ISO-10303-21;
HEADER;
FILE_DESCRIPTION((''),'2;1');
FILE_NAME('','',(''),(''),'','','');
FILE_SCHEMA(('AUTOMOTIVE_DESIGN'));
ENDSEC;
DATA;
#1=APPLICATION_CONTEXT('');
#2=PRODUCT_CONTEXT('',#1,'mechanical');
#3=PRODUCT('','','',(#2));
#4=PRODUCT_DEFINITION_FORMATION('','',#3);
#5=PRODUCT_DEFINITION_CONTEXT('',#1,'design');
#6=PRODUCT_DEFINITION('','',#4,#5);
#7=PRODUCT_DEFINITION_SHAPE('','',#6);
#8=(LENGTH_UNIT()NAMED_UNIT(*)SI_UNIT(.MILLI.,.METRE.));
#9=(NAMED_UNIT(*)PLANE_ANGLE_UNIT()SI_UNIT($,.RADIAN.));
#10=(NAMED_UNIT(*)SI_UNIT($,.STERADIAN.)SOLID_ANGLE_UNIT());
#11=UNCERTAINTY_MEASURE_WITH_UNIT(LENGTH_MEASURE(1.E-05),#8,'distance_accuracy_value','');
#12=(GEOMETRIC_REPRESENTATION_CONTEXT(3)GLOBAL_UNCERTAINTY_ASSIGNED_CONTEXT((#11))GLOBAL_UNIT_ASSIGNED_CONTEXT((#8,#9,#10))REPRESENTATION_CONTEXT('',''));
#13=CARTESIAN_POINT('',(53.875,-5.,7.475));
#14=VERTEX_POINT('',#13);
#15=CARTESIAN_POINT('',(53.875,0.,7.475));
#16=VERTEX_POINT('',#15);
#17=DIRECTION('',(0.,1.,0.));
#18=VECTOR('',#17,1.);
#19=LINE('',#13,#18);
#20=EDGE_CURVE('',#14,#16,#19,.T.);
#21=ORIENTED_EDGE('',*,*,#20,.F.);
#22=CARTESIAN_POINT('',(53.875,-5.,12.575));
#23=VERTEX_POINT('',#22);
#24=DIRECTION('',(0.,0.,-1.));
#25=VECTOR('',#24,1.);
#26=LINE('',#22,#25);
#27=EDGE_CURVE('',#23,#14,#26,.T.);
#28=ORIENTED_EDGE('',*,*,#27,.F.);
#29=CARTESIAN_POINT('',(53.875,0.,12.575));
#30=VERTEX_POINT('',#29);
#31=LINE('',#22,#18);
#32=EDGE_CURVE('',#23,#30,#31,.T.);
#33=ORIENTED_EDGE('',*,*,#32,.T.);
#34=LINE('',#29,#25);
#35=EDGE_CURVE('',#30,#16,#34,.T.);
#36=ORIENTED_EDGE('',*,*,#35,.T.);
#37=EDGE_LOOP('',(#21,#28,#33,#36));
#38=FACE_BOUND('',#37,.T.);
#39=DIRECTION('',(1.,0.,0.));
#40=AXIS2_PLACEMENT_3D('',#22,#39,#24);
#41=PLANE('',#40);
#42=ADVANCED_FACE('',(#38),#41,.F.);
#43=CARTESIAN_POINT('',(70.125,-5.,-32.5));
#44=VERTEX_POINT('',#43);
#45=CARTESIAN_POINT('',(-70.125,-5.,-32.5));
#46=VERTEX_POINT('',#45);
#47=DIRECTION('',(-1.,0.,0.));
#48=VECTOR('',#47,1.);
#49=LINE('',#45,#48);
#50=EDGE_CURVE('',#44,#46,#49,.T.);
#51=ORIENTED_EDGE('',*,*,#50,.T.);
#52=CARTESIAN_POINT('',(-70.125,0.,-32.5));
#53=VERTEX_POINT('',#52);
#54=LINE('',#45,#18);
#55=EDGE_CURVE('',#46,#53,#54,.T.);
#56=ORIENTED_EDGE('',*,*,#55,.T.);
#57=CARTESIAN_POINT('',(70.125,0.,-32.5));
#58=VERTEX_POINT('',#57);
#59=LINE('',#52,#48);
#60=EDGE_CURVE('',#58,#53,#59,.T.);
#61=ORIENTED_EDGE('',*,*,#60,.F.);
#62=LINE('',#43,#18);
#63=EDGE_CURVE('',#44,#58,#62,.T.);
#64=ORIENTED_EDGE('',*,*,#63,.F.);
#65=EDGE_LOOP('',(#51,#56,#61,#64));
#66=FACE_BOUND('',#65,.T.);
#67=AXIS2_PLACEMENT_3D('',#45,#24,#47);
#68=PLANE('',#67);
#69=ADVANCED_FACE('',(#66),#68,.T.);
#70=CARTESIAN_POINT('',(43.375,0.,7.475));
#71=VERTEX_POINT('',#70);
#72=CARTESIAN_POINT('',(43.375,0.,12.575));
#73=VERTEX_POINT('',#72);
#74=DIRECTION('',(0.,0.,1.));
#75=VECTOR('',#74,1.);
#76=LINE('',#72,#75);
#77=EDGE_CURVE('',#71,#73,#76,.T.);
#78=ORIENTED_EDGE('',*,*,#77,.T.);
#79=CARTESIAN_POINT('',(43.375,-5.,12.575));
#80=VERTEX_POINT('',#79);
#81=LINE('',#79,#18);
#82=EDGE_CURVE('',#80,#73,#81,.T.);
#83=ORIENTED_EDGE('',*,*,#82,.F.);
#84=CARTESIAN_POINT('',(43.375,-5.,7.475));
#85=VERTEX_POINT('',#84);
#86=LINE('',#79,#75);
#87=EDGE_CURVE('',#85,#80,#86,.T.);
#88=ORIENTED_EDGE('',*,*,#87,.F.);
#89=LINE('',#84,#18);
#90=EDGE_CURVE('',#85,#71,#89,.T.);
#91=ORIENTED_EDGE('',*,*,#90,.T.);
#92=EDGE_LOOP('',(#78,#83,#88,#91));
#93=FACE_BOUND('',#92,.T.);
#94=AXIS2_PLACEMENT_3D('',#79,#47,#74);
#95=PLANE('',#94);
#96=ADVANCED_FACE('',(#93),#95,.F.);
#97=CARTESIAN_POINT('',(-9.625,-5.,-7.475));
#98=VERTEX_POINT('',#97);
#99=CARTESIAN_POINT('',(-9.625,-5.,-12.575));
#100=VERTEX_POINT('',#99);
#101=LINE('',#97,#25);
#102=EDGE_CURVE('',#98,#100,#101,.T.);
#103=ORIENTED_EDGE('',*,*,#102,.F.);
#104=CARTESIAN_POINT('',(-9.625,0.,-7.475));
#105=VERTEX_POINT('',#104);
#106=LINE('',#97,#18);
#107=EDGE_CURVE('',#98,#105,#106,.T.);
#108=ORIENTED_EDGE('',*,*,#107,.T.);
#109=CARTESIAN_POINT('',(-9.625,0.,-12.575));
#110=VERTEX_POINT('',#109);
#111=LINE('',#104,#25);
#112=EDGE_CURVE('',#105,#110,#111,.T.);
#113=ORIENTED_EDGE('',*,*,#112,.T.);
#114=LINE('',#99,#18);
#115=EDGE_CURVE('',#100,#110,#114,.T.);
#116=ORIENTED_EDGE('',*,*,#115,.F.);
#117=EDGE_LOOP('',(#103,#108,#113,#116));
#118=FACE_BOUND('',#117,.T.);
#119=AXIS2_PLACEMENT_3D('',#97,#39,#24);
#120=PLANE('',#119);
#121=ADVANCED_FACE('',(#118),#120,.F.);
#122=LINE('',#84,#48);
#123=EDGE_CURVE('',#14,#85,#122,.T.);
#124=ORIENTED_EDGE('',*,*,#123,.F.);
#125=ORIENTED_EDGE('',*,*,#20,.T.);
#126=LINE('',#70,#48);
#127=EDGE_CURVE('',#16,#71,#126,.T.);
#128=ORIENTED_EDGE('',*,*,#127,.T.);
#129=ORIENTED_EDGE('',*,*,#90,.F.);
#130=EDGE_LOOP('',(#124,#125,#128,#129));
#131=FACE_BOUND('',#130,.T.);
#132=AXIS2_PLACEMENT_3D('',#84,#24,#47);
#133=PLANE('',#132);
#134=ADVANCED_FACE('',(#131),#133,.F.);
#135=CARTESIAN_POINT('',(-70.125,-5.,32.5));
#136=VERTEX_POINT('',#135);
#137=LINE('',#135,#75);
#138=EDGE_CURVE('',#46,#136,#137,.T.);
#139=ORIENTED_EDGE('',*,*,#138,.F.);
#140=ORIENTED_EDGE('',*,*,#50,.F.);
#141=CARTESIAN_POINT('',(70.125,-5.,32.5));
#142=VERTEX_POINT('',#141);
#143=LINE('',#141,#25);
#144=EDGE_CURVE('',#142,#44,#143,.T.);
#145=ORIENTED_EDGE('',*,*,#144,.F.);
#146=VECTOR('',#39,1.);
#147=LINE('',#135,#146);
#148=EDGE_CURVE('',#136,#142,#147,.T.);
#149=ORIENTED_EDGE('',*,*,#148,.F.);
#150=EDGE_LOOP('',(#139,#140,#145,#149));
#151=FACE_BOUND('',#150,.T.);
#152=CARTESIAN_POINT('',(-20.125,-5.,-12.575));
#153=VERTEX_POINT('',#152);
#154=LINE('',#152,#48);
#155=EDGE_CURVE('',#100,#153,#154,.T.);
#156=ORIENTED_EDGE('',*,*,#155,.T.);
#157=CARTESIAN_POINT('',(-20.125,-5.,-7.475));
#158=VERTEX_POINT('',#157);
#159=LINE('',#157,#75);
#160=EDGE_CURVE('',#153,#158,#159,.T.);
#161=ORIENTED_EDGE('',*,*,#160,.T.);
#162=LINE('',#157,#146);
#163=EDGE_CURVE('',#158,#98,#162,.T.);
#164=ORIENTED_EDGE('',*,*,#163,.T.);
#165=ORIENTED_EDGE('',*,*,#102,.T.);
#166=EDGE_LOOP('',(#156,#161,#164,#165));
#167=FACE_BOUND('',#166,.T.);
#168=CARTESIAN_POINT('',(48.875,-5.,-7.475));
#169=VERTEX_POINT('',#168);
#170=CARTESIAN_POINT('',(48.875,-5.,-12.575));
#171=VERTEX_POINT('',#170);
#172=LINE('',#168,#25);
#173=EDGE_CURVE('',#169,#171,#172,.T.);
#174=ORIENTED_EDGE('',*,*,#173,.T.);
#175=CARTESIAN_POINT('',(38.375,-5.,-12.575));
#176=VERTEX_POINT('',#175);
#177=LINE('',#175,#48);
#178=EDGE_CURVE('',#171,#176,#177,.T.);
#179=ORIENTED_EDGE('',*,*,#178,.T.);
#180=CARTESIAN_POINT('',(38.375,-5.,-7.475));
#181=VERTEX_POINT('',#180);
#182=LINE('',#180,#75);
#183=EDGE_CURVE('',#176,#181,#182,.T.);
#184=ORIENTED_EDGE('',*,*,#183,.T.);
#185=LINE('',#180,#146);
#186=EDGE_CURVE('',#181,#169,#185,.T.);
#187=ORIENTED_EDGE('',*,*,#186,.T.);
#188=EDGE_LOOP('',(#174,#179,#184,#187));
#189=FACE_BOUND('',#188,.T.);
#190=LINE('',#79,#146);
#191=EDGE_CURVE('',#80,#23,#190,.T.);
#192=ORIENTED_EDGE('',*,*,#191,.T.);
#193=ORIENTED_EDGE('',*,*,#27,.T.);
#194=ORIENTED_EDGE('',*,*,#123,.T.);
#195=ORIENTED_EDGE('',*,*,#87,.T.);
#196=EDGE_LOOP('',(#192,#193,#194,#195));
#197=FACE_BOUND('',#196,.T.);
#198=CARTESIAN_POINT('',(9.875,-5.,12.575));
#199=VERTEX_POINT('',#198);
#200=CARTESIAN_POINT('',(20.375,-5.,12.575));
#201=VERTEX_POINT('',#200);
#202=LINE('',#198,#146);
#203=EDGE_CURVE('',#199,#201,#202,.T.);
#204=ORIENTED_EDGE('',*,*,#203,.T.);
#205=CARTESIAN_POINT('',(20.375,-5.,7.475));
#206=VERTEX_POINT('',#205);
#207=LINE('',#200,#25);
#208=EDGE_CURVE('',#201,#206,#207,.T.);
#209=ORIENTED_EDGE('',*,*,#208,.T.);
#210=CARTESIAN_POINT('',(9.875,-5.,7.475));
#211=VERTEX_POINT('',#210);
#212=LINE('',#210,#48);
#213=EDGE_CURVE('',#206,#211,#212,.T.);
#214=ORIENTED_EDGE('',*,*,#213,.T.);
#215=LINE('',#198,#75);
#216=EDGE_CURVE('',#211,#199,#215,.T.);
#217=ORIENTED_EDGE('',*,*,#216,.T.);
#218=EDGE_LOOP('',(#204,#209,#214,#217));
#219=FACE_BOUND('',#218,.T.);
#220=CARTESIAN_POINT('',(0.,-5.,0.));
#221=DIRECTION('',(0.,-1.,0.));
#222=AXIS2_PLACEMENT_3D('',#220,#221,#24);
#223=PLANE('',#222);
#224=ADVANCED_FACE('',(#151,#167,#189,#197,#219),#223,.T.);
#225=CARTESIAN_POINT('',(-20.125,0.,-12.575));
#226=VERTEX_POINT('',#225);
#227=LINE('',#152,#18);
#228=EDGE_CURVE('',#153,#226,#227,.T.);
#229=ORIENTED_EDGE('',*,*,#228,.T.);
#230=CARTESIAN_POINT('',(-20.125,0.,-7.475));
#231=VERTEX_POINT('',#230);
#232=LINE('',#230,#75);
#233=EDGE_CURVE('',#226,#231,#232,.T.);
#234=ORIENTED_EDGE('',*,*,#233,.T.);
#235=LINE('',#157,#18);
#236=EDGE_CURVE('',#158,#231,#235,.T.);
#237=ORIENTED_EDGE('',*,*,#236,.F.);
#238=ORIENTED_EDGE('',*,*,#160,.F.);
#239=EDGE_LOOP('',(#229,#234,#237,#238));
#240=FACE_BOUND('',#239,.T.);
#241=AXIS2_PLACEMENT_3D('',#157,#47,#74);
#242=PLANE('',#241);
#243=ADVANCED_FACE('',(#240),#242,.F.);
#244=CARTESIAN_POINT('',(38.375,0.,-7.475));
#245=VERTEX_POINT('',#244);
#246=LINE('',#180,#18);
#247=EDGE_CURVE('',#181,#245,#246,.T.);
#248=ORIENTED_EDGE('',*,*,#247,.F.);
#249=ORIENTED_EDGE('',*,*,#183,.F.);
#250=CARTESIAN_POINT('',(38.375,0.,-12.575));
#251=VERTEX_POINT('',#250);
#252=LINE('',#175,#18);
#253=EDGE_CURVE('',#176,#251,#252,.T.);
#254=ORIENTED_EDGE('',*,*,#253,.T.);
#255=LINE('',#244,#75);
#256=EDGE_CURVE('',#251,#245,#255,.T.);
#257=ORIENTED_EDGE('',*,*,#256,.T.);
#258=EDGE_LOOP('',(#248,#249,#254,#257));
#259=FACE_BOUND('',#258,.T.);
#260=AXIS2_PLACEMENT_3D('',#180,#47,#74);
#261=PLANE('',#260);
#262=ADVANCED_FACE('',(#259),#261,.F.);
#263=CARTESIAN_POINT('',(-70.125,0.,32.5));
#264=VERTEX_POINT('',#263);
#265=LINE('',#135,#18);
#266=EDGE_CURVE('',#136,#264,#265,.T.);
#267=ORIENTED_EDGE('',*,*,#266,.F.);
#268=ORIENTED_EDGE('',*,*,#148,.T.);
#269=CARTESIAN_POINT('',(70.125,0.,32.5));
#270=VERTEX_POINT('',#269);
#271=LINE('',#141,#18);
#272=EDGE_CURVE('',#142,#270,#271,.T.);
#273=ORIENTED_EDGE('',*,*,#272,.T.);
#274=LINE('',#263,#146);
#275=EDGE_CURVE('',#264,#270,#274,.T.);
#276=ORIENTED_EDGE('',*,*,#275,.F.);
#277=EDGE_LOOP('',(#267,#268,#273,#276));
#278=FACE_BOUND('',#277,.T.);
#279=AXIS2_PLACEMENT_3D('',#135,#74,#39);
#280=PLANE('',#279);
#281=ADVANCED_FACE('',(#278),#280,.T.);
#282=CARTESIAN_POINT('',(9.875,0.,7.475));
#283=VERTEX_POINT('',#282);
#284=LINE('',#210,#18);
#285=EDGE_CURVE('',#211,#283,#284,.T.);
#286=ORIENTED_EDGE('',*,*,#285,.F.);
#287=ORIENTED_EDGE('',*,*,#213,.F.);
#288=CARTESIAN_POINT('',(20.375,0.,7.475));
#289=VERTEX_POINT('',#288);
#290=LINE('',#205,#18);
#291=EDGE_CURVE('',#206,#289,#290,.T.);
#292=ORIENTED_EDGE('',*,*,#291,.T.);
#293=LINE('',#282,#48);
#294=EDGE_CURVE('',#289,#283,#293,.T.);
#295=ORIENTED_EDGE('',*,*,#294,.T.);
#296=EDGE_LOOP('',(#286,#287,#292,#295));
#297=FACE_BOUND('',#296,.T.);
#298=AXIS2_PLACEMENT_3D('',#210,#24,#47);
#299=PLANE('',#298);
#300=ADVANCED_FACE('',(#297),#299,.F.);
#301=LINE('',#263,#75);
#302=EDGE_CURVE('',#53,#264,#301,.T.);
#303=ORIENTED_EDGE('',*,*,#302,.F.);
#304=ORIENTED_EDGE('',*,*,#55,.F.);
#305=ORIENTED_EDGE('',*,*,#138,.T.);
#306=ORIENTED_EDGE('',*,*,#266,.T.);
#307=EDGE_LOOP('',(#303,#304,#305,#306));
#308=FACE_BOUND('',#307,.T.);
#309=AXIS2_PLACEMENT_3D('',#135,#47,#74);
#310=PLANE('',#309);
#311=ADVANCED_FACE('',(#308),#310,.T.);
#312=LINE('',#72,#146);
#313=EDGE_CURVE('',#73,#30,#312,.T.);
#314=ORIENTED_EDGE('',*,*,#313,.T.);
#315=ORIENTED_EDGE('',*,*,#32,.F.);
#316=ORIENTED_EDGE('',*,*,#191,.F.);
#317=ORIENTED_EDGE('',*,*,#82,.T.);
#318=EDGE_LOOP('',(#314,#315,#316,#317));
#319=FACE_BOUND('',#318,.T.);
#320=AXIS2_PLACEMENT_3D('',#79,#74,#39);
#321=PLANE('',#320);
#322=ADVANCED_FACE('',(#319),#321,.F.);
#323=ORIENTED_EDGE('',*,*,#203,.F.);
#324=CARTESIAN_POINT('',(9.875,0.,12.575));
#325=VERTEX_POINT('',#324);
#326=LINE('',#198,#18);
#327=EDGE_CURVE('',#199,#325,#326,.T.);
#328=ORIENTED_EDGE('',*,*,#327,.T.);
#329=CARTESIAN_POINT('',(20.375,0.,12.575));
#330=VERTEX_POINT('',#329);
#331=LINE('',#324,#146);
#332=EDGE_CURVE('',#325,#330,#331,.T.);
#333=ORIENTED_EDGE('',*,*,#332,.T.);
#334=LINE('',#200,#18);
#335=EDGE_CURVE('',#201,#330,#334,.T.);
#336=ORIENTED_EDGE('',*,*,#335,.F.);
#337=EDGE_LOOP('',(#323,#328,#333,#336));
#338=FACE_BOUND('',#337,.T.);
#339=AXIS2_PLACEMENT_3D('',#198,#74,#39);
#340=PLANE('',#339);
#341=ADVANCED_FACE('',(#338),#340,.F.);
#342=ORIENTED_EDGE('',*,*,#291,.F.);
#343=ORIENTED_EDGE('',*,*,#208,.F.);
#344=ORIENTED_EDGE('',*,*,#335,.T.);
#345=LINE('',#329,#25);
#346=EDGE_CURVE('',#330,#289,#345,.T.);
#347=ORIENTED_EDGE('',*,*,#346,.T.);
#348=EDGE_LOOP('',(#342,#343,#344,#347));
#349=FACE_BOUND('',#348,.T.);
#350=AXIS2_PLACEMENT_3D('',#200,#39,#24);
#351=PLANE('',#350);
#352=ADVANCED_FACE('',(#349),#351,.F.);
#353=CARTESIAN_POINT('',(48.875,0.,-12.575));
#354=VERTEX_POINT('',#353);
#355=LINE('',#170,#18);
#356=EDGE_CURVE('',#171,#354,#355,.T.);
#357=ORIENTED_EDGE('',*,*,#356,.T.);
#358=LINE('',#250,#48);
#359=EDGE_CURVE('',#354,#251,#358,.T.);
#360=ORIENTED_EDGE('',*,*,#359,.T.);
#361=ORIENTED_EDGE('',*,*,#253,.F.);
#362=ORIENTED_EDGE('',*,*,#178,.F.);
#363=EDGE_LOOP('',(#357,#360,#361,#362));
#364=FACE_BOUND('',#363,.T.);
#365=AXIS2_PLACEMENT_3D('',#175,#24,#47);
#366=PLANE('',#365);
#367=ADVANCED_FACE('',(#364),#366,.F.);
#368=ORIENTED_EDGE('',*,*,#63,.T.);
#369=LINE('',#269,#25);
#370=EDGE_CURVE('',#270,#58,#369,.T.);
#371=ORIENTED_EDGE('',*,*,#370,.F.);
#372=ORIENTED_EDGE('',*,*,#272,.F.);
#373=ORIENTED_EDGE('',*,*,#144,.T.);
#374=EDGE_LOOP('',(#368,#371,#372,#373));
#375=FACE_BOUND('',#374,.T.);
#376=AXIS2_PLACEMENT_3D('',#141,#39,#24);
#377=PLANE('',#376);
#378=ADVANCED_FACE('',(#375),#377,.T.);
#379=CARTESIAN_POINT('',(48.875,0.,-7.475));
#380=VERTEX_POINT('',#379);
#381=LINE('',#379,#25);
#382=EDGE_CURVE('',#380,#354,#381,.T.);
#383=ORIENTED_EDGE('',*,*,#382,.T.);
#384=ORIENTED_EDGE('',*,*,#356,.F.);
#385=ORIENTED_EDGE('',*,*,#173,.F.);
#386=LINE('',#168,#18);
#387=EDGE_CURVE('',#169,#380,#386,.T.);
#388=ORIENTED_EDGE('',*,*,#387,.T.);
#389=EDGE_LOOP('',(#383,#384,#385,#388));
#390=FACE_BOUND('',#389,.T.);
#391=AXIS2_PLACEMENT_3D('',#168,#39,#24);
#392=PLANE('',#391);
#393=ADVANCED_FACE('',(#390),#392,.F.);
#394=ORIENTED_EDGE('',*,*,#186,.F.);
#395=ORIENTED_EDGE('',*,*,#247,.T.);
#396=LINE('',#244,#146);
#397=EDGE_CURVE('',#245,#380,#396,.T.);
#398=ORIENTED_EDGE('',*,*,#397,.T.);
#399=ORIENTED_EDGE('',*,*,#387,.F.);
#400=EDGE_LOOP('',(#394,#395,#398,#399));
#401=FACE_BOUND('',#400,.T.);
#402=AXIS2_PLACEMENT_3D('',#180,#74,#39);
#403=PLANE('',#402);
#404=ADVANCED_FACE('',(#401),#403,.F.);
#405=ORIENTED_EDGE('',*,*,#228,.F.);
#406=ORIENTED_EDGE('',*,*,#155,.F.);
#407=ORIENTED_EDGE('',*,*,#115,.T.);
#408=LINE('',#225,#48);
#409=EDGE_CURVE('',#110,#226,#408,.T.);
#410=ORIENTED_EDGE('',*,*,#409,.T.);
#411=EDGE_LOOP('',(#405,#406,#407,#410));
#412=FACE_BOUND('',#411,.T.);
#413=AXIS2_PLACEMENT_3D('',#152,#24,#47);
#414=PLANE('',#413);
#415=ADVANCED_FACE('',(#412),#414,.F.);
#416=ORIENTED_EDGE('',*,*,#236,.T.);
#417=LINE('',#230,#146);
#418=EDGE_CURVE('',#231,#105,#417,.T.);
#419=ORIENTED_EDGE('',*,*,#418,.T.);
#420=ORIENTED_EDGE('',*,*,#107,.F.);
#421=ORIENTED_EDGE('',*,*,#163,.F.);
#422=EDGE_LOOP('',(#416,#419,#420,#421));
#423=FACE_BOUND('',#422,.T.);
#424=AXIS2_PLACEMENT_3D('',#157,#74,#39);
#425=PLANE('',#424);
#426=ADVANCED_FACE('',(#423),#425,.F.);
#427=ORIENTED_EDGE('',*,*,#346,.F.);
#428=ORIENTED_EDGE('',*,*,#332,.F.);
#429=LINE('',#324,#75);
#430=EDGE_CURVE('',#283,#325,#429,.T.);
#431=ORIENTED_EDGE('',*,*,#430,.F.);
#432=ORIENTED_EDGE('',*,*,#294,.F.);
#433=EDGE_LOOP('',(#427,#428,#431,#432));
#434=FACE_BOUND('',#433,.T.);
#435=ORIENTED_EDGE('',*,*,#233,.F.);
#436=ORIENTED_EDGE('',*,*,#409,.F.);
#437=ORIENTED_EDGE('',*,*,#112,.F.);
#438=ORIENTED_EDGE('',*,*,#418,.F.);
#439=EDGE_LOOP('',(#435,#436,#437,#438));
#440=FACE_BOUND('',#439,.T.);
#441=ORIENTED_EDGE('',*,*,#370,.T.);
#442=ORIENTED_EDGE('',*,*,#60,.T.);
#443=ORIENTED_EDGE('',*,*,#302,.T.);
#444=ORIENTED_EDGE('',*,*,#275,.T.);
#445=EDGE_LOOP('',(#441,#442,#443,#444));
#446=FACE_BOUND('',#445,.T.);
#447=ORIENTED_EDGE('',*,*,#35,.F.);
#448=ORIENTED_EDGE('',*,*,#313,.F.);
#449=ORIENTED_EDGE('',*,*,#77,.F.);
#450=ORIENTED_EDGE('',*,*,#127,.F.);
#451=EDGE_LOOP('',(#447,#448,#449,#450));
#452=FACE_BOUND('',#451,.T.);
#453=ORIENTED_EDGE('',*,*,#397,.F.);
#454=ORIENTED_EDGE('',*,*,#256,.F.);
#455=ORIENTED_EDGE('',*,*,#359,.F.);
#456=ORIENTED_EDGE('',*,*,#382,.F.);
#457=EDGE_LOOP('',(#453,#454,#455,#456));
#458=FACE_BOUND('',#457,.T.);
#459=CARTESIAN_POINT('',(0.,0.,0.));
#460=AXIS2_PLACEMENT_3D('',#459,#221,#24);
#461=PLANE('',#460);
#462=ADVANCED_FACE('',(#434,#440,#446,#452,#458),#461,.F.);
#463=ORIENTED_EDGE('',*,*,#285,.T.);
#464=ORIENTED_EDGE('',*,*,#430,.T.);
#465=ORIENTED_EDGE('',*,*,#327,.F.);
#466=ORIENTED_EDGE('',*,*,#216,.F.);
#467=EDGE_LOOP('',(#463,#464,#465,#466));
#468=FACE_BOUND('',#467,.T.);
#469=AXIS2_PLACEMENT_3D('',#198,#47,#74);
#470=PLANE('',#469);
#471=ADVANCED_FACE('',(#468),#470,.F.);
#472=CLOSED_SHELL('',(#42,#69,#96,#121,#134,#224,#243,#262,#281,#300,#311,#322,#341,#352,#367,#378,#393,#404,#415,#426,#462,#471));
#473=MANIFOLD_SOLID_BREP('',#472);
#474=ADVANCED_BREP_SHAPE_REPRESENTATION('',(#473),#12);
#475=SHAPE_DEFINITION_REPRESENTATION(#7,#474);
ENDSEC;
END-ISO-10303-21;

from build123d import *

# Parameters (mm, degrees)
SKETCH1_W          = 140.25
SKETCH1_H          = 65
SKETCH1_W_2        = 10.5
SKETCH1_H_2        = 5.1
BASE_FLANGE1_DEPTH = 5


# Sheet-metal steps are written as plain solids
with BuildPart() as part:
    # Sketch1 → Base-Flange1 (new body)
    with BuildSketch(Plane(origin=(0, 0, 0), x_dir=(1, 0, 0), z_dir=(0, 1, 0))):
        Rectangle(SKETCH1_W, SKETCH1_H)
        with Locations((-14.875, 10.025)):
            Rectangle(SKETCH1_W_2, SKETCH1_H_2, mode=Mode.SUBTRACT)
        with Locations((43.625, 10.025)):
            Rectangle(SKETCH1_W_2, SKETCH1_H_2, mode=Mode.SUBTRACT)
        with Locations((15.125, -10.025)):
            Rectangle(SKETCH1_W_2, SKETCH1_H_2, mode=Mode.SUBTRACT)
        with Locations((48.625, -10.025)):
            Rectangle(SKETCH1_W_2, SKETCH1_H_2, mode=Mode.SUBTRACT)
    extrude(amount=-BASE_FLANGE1_DEPTH)


solid = part.part
